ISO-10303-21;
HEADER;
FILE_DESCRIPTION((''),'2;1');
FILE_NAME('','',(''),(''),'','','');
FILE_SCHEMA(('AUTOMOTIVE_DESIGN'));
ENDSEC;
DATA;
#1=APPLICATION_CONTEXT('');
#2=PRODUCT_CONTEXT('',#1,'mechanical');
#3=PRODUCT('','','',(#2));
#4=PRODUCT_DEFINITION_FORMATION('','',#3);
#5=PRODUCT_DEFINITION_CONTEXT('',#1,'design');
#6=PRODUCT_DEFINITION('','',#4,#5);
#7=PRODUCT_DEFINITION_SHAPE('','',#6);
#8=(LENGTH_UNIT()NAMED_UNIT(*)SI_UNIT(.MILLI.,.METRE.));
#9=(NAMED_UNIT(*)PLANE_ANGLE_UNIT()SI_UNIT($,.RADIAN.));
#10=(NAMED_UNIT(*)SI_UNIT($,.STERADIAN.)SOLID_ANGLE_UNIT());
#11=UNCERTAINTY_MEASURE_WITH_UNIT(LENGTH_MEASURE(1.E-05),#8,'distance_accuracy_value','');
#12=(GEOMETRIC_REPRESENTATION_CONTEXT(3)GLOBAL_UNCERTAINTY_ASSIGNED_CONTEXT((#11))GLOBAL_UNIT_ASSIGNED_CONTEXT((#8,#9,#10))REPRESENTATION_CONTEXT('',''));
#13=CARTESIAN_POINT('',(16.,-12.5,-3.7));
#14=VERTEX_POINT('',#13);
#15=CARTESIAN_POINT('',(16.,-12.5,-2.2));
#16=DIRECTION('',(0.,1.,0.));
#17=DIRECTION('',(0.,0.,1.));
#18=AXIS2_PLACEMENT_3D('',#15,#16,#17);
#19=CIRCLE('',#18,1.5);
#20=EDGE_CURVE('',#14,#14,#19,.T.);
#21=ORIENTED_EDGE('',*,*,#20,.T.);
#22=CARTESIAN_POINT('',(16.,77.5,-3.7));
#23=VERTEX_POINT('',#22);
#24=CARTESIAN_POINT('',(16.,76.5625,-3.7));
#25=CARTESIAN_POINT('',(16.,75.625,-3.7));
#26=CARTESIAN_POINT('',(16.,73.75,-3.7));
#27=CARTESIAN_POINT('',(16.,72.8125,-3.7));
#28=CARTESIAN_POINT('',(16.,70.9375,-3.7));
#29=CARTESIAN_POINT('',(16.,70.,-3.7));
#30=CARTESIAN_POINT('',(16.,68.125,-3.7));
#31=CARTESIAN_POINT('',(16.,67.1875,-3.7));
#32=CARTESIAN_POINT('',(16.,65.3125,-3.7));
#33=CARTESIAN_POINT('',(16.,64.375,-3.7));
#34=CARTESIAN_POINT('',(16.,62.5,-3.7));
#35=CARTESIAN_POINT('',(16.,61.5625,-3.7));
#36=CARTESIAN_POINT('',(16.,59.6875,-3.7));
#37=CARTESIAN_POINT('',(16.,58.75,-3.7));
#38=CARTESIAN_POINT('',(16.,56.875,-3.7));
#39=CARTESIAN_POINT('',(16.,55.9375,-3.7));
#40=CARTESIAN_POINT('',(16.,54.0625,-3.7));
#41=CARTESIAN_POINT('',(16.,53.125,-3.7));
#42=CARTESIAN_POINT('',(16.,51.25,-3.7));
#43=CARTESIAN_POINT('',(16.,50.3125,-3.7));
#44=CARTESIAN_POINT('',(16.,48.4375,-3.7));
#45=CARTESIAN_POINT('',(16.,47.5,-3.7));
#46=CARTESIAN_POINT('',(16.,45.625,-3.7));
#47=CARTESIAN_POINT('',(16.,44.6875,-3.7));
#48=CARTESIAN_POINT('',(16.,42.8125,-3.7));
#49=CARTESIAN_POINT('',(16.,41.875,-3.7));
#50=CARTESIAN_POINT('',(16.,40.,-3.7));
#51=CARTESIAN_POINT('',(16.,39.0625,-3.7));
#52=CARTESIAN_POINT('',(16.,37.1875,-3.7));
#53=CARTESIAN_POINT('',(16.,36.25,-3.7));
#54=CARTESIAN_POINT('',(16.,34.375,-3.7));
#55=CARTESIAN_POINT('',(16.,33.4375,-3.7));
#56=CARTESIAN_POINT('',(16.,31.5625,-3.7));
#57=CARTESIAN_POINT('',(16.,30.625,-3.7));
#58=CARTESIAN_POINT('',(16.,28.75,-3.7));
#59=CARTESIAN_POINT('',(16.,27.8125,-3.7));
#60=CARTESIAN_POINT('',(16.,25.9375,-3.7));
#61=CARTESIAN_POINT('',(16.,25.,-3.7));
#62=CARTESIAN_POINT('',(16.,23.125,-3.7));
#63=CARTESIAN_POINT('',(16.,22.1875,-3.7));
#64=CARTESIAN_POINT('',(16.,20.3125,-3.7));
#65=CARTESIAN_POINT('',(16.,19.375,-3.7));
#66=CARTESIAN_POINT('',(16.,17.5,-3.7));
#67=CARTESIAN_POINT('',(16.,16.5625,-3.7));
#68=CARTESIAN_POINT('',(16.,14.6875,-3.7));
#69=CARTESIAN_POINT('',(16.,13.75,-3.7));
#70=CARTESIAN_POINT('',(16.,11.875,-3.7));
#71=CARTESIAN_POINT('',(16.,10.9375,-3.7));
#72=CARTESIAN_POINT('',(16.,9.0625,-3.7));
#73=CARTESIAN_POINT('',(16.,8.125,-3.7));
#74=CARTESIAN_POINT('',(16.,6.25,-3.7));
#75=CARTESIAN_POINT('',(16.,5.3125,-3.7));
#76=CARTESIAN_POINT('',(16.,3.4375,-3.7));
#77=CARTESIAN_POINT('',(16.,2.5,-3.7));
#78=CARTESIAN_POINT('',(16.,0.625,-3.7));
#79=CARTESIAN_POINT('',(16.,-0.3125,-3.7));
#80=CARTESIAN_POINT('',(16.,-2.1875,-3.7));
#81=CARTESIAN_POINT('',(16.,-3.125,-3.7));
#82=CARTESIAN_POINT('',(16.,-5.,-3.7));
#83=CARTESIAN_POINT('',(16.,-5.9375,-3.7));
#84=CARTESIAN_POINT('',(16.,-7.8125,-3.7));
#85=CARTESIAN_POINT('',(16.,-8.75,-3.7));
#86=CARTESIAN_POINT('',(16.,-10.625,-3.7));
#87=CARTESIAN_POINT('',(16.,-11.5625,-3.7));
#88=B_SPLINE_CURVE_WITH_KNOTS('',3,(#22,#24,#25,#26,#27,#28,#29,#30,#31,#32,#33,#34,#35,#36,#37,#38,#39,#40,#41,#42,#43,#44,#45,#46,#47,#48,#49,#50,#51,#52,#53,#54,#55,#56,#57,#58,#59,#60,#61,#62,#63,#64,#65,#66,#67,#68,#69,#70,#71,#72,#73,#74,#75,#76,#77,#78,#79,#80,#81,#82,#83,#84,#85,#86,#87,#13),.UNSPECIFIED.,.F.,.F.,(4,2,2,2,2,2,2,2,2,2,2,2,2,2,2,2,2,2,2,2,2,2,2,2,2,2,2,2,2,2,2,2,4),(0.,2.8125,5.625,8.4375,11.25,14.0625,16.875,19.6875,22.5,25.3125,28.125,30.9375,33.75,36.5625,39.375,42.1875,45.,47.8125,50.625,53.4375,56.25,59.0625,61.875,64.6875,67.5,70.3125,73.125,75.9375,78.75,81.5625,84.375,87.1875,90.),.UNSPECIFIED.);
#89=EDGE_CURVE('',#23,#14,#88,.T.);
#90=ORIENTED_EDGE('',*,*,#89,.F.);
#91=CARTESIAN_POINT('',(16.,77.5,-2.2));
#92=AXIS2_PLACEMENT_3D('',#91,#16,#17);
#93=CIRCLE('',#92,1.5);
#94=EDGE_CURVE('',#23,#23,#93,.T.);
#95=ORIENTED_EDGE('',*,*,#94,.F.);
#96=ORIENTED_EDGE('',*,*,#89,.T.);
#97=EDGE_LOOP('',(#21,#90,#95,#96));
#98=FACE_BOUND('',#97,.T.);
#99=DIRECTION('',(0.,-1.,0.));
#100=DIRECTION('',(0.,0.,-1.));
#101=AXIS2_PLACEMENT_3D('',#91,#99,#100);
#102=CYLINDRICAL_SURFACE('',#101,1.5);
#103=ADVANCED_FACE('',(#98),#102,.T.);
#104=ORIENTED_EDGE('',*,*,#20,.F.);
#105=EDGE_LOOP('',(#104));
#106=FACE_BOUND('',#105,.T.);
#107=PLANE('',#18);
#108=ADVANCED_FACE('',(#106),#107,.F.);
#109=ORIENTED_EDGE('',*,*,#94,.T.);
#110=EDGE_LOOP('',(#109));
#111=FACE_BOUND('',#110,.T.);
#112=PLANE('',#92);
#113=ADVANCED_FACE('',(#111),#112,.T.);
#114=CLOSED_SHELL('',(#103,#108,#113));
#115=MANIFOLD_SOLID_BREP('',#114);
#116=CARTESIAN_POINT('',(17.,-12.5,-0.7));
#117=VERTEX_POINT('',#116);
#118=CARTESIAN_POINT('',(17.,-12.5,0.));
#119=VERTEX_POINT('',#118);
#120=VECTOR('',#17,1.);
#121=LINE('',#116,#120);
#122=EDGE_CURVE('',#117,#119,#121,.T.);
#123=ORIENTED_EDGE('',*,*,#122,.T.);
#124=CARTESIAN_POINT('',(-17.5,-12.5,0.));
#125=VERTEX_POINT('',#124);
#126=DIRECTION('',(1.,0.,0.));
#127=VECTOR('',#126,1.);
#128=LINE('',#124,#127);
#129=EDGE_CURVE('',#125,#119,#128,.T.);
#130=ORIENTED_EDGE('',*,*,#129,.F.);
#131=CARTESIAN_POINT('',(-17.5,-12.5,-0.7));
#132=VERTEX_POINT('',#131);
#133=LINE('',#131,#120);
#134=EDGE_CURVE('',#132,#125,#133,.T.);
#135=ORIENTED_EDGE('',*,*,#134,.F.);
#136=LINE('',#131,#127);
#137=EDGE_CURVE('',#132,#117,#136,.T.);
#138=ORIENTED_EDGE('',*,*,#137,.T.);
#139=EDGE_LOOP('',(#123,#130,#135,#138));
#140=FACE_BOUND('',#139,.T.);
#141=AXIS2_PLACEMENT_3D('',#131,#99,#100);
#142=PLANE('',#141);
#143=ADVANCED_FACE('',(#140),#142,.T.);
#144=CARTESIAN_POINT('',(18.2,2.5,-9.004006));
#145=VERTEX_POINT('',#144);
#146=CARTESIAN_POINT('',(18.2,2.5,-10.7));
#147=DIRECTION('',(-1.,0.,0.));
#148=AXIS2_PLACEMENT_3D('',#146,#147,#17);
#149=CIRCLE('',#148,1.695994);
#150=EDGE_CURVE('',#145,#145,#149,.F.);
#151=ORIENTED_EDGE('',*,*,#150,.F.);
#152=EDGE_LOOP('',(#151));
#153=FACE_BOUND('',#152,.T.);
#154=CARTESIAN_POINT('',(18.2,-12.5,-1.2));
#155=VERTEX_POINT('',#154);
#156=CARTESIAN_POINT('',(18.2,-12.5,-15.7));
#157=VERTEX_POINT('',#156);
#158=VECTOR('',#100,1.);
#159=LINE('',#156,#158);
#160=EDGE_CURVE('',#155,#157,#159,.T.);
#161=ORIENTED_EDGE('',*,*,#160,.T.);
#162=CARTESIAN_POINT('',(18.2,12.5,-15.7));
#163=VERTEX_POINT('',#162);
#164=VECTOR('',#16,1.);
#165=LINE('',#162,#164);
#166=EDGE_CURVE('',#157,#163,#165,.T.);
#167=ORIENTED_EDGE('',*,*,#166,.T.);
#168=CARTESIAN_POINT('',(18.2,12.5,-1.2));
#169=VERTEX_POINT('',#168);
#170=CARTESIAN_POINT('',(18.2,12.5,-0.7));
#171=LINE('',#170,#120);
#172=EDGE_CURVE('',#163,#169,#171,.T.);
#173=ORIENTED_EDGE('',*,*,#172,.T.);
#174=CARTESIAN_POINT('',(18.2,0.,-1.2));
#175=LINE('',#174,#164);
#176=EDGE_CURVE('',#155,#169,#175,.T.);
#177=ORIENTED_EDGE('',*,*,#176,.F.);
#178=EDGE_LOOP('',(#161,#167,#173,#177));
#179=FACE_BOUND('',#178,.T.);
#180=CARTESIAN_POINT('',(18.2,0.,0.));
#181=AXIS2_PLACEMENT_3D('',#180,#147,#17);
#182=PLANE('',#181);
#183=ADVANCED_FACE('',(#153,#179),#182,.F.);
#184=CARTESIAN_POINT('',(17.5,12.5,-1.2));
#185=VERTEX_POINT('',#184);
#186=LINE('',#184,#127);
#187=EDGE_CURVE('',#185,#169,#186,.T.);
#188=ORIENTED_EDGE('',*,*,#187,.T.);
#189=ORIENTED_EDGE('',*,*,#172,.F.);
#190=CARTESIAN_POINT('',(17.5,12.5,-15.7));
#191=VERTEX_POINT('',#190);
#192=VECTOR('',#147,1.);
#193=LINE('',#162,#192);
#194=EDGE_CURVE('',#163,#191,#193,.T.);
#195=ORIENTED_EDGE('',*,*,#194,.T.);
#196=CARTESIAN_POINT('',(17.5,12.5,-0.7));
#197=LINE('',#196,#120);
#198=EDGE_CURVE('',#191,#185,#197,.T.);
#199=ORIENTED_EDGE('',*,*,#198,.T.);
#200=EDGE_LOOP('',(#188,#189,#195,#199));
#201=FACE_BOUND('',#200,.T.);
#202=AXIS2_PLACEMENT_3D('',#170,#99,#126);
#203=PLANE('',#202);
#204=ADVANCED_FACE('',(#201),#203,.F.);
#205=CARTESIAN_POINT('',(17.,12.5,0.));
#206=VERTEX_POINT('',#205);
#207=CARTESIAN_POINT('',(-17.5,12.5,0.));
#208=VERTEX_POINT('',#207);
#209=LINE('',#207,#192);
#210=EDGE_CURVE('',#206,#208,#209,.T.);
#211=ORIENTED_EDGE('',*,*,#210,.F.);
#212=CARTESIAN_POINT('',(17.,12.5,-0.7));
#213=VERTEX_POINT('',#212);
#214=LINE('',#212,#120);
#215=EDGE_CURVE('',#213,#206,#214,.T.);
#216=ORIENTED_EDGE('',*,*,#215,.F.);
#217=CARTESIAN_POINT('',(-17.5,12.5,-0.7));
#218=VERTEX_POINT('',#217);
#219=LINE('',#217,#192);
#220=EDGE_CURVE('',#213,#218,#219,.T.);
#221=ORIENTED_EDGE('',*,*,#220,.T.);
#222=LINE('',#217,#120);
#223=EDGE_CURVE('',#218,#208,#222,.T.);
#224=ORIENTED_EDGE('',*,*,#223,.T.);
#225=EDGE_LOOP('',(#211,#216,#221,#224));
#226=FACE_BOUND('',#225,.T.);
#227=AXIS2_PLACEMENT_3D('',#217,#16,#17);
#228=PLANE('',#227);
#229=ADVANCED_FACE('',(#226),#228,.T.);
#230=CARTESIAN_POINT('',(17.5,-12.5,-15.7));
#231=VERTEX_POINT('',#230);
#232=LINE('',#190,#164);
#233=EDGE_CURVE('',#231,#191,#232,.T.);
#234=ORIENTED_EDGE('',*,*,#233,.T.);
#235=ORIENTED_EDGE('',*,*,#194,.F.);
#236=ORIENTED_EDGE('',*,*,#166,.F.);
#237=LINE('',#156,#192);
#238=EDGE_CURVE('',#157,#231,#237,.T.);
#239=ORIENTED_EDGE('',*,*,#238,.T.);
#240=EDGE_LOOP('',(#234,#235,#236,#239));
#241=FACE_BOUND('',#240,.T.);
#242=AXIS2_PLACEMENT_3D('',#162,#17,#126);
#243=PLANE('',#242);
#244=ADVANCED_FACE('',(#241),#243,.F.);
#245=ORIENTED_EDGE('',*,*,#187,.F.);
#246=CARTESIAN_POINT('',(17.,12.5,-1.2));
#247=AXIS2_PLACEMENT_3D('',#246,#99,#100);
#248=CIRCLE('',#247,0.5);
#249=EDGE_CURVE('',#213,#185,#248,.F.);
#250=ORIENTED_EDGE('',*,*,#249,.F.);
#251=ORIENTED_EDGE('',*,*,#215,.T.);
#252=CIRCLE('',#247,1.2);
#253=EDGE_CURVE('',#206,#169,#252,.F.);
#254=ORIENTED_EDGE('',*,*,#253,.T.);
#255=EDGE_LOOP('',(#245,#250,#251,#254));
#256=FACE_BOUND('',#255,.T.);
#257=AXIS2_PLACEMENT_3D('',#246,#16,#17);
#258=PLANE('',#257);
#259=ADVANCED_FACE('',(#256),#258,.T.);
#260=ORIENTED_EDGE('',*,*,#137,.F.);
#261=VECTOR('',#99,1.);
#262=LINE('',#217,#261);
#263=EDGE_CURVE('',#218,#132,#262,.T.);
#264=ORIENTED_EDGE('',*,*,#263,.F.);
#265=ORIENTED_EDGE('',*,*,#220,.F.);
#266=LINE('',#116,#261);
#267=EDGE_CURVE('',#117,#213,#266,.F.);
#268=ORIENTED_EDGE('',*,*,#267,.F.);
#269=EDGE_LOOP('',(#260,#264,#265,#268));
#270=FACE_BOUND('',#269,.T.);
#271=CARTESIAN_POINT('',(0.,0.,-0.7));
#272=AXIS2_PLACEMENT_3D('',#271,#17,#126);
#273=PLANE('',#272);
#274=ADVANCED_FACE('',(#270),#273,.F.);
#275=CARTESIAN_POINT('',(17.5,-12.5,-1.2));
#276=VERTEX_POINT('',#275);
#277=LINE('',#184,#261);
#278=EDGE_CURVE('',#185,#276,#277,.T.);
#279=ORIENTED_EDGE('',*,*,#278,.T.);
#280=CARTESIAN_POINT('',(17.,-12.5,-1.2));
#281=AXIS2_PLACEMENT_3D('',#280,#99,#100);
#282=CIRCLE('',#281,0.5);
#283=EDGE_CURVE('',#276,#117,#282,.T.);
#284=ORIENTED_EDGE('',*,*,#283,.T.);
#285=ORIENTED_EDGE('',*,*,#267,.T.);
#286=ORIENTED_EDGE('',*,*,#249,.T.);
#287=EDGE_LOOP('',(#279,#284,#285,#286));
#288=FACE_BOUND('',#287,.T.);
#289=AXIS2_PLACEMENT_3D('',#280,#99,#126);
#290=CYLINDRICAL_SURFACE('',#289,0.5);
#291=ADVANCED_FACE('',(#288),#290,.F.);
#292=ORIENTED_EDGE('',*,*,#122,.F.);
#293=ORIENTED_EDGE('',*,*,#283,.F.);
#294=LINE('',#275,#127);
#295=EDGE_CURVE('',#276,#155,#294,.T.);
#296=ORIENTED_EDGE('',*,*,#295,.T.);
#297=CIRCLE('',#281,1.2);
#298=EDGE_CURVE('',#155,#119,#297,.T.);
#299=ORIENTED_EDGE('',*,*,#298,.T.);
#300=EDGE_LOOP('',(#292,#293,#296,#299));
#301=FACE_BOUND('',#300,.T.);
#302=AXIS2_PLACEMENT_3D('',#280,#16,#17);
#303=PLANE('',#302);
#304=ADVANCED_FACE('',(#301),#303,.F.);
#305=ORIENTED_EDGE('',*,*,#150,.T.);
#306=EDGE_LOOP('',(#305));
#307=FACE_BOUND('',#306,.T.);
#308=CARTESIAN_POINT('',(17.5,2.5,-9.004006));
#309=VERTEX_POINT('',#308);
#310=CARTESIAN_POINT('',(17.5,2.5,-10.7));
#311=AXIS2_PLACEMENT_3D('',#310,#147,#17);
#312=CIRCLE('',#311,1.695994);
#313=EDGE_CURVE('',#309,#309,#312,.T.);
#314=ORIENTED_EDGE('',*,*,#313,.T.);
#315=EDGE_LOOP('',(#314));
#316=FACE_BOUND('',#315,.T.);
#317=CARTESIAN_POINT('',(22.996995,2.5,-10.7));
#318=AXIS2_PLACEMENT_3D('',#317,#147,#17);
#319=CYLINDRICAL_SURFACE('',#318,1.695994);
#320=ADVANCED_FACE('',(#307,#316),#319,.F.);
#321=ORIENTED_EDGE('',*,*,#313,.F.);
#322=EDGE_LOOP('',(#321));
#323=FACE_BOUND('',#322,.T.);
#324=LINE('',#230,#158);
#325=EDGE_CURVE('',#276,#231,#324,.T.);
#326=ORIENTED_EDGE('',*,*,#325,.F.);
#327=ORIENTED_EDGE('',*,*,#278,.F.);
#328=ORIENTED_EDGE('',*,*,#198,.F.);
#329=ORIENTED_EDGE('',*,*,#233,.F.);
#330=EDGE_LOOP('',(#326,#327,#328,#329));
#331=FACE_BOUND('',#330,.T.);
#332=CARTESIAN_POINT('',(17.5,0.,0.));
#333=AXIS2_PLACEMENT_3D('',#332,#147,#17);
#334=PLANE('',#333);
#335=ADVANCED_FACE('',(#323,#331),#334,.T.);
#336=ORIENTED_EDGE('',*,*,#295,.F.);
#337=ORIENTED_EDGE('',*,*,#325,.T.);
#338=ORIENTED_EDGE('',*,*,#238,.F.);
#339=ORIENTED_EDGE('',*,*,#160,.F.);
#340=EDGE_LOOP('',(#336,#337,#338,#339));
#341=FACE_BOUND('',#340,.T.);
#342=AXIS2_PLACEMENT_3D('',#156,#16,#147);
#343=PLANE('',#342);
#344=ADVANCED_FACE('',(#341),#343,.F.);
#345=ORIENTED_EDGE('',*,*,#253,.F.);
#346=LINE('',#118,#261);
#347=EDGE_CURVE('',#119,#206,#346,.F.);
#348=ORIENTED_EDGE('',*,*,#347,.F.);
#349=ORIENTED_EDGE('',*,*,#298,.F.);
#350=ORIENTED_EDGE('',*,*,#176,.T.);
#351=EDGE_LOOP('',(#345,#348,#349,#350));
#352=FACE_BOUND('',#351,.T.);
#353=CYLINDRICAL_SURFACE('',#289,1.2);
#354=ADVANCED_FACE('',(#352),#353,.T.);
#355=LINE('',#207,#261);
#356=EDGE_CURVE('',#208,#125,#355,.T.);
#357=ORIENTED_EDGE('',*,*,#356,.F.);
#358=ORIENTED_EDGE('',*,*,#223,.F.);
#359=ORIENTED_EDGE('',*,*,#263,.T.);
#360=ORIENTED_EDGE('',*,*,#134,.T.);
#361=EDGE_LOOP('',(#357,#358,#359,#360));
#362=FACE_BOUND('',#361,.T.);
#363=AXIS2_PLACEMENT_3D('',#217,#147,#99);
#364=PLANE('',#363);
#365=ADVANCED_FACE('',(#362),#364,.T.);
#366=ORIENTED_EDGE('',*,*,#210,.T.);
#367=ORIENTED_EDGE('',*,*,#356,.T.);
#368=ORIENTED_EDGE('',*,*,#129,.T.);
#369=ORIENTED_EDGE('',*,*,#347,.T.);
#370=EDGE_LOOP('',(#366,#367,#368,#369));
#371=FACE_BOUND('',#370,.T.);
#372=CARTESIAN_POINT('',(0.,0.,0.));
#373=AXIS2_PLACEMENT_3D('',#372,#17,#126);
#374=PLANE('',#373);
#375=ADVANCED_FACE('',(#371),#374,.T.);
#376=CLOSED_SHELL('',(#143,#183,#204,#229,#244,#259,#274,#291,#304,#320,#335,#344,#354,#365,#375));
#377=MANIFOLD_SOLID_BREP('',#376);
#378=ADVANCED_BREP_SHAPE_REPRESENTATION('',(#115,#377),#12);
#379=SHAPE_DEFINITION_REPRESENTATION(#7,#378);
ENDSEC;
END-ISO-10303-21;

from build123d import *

# Parameters (mm, degrees)
SKETCH1_W                    = 35
SKETCH1_H                    = 25
BASE_FLANGE1_DEPTH           = 0.7
SKETCH6_R                    = 1.5
BOSS_EXTRUDE1_DEPTH          = 90
EDGE_FLANGE1_STRIP_W         = 3.8
EDGE_FLANGE1_STRIP_H         = 0.7
EDGE_FLANGE1_STRIP_CUT_DEPTH = 25
EDGE_FLANGE1_DEPTH           = 25
SKETCH10_R                   = 1.695993735
CUT_EXTRUDE1_DEPTH           = 0.7


# Sheet-metal steps are written as plain solids
with BuildPart() as part:
    # Sketch1 → Base-Flange1 (new body)
    with BuildSketch(Plane.XY):
        Rectangle(SKETCH1_W, SKETCH1_H)
    extrude(amount=-BASE_FLANGE1_DEPTH)

    # Edge-Flange1 strip (across the edge) → Edge-Flange1 strip cut (cut)
    with BuildSketch(Plane(origin=(17.5, 12.5, -0.7), x_dir=(-1, 0, 0), z_dir=(0, -1, 0))):
        with Locations((-1.4, -0.35)):
            Rectangle(EDGE_FLANGE1_STRIP_W, EDGE_FLANGE1_STRIP_H)
    extrude(amount=EDGE_FLANGE1_STRIP_CUT_DEPTH, mode=Mode.SUBTRACT)

    # Edge-Flange1 section (across the edge) → Edge-Flange1 (add)
    with BuildSketch(Plane(origin=(17.5, 12.5, -0.7), x_dir=(-1, 0, 0), z_dir=(0, -1, 0))):
        with BuildLine():
            Line((-0.7, 0.5), (-0.7, 15))
            Line((-0.7, 15), (0, 15))
            Line((0, 15), (0, 0.5))
            ThreePointArc((0, 0.5), (0.146446609, 0.146446609), (0.5, 0))
            Line((0.5, 0), (0.5, -0.7))
            ThreePointArc((0.5, -0.7), (-0.348528137, -0.348528137), (-0.7, 0.5))
        make_face()
    extrude(amount=EDGE_FLANGE1_DEPTH)

    # Sketch10 → Cut-Extrude1 (cut)
    with BuildSketch(Plane.ZY.offset(-17.5)):
        with Locations((-10.7, 2.5)):
            Circle(SKETCH10_R)
    extrude(amount=-CUT_EXTRUDE1_DEPTH, mode=Mode.SUBTRACT)


with BuildPart() as body_2:
    # Sketch6 → Boss-Extrude1 (new body)
    with BuildSketch(Plane(origin=(0, -12.5, 0), x_dir=(1, 0, 0), z_dir=(0, 1, 0))):
        with Locations(Location((16, 2.2, 0), (0, 0, 90))):
            Circle(SKETCH6_R)
    extrude(amount=BOSS_EXTRUDE1_DEPTH)


solid = Compound([part.part, body_2.part])
